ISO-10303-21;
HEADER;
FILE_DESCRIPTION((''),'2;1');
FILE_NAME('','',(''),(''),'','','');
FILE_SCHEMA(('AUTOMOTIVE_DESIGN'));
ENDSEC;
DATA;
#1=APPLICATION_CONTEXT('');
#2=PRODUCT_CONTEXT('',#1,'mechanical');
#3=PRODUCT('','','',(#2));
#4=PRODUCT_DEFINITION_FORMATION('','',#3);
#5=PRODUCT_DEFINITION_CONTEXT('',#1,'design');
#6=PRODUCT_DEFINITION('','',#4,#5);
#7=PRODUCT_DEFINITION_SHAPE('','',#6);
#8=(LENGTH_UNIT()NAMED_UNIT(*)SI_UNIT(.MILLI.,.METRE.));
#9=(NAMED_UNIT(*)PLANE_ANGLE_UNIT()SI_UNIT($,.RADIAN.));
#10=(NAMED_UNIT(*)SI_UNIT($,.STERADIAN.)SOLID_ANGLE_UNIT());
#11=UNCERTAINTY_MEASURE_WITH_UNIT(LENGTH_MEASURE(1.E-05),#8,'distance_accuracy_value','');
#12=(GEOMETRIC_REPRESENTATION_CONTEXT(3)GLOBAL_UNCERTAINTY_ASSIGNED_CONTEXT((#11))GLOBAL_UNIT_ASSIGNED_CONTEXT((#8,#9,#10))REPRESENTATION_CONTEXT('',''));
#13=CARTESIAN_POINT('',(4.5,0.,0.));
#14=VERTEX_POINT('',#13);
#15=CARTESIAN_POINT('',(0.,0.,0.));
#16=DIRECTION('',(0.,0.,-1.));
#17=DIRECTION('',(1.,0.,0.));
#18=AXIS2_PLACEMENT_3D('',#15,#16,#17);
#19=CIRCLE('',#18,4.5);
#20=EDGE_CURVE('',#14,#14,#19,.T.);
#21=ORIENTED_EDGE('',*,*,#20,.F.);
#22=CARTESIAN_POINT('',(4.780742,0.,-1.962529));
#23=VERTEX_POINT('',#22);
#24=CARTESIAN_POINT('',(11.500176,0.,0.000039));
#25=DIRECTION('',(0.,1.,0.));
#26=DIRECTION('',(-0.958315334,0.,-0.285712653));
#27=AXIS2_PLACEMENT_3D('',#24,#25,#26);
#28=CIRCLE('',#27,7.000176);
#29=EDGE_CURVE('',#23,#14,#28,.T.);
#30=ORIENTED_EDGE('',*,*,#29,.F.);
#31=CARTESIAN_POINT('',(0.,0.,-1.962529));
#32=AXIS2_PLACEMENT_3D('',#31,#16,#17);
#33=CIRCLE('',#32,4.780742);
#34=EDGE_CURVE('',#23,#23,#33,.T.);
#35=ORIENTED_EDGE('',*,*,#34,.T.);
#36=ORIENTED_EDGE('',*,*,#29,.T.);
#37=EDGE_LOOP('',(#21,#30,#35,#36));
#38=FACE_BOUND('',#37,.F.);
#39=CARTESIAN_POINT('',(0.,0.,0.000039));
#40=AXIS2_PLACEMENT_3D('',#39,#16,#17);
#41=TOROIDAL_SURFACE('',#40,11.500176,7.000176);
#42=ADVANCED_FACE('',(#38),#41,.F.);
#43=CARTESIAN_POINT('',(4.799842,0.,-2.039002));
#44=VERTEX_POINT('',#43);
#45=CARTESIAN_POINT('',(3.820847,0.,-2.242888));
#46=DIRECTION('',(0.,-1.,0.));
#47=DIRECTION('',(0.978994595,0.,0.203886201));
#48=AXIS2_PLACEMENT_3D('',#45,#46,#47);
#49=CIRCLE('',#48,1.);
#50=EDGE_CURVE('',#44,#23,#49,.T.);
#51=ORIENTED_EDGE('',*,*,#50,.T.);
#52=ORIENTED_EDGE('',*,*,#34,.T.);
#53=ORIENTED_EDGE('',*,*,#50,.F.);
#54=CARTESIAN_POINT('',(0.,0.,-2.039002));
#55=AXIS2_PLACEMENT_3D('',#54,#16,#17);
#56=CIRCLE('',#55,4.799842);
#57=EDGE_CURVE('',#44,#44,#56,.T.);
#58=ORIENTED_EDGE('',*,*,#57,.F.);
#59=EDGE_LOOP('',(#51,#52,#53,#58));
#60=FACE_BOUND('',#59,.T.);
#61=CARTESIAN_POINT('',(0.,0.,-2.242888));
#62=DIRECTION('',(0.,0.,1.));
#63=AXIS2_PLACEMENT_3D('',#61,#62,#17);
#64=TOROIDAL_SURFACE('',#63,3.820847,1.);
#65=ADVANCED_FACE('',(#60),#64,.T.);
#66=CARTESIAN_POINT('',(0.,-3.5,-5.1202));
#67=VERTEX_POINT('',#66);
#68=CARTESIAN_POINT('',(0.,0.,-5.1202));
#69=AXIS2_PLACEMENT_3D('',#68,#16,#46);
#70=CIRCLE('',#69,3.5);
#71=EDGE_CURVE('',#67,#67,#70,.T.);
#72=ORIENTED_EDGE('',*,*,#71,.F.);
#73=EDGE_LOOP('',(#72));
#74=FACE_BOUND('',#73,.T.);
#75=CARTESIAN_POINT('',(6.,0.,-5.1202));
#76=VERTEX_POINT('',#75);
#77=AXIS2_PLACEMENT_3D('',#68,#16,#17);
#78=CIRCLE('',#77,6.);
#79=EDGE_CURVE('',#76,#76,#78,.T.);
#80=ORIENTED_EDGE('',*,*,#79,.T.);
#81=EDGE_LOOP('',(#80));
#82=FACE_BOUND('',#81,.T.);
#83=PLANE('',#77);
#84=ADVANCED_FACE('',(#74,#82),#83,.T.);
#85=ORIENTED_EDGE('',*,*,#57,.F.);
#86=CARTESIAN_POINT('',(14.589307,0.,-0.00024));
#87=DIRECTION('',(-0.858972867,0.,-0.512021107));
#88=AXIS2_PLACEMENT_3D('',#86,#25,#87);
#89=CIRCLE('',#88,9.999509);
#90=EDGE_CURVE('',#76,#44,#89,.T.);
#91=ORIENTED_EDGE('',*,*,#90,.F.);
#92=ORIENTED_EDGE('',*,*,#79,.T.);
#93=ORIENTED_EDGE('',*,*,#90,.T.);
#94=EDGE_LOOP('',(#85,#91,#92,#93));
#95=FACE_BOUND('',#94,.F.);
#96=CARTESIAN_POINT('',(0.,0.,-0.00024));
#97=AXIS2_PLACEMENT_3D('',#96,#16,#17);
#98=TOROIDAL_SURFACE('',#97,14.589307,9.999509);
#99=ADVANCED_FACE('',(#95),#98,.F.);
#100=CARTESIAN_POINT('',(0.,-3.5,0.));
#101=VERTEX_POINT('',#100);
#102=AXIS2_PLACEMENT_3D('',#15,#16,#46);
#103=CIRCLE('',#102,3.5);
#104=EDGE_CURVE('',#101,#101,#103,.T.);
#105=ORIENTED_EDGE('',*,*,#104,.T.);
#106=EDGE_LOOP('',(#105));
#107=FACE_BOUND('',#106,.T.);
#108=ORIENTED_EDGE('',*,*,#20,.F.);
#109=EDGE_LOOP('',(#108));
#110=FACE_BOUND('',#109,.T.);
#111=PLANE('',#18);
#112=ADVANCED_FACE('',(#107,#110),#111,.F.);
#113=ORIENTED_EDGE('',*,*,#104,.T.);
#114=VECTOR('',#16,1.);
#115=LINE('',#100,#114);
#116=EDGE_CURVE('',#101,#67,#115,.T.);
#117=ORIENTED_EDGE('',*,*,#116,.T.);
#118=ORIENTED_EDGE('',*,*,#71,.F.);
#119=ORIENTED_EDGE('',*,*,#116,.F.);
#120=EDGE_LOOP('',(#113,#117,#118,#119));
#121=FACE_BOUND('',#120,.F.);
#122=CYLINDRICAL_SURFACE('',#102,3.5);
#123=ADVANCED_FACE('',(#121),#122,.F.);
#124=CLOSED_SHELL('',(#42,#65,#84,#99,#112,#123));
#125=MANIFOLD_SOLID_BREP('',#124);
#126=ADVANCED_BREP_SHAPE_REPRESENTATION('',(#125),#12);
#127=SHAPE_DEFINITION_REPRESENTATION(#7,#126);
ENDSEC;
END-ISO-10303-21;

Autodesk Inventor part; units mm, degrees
ref_plane "YZ Plane" through (0, 0, 0) normal (1, 0, 0) x (0, 1, 0)
ref_plane "XZ Plane" through (0, 0, 0) normal (0, 1, 0) x (-1, 0, 0)
ref_plane "XY Plane" through (0, 0, 0) normal (0, 0, 1) x (1, 0, 0)
sketch "Sketch1" plane through (0, 0, 0) normal (0, 1, 0) x (-1, 0, 0)
  line L0 (0, 0) -> (0, -8)
  line L1 (0, 0) -> (-4.5, 0)
  arc A0 (-4.7918, -2) -> (-4.5, 0) centre (-11.5, 0) ccw
  line L2 (-6, -5.1202) -> (0, -5.1202)
  arc A1 (-6, -5.1202) -> (-4.7918, -2) centre (-14.5898, 0) ccw
  dimension "d6" = 8
  dimension "d7" = 7
  dimension "d9" = 12
  dimension "d10" = 9
  dimension "d11" = 10
  dimension "d12" = 2
revolve "Revolution1" add sketch "Sketch1" angle 360 about axis through (0, 0, 0) along (0, 0, -1)
sketch "Sketch2" plane through (0, 0, 0) normal (0, 0, 1) x (1, 0, 0)
  circle A0 centre (0, 0) radius 4.5 construction
hole "Hole1" at (0, 0, 0) direction (0, 0, -1) diameter 7 depth 5.1202
fillet "Fillet1" radius 1 1 edges at (-4.7918, 0, -2)
properties part number "VenturiEinsatz" material "Copper"
